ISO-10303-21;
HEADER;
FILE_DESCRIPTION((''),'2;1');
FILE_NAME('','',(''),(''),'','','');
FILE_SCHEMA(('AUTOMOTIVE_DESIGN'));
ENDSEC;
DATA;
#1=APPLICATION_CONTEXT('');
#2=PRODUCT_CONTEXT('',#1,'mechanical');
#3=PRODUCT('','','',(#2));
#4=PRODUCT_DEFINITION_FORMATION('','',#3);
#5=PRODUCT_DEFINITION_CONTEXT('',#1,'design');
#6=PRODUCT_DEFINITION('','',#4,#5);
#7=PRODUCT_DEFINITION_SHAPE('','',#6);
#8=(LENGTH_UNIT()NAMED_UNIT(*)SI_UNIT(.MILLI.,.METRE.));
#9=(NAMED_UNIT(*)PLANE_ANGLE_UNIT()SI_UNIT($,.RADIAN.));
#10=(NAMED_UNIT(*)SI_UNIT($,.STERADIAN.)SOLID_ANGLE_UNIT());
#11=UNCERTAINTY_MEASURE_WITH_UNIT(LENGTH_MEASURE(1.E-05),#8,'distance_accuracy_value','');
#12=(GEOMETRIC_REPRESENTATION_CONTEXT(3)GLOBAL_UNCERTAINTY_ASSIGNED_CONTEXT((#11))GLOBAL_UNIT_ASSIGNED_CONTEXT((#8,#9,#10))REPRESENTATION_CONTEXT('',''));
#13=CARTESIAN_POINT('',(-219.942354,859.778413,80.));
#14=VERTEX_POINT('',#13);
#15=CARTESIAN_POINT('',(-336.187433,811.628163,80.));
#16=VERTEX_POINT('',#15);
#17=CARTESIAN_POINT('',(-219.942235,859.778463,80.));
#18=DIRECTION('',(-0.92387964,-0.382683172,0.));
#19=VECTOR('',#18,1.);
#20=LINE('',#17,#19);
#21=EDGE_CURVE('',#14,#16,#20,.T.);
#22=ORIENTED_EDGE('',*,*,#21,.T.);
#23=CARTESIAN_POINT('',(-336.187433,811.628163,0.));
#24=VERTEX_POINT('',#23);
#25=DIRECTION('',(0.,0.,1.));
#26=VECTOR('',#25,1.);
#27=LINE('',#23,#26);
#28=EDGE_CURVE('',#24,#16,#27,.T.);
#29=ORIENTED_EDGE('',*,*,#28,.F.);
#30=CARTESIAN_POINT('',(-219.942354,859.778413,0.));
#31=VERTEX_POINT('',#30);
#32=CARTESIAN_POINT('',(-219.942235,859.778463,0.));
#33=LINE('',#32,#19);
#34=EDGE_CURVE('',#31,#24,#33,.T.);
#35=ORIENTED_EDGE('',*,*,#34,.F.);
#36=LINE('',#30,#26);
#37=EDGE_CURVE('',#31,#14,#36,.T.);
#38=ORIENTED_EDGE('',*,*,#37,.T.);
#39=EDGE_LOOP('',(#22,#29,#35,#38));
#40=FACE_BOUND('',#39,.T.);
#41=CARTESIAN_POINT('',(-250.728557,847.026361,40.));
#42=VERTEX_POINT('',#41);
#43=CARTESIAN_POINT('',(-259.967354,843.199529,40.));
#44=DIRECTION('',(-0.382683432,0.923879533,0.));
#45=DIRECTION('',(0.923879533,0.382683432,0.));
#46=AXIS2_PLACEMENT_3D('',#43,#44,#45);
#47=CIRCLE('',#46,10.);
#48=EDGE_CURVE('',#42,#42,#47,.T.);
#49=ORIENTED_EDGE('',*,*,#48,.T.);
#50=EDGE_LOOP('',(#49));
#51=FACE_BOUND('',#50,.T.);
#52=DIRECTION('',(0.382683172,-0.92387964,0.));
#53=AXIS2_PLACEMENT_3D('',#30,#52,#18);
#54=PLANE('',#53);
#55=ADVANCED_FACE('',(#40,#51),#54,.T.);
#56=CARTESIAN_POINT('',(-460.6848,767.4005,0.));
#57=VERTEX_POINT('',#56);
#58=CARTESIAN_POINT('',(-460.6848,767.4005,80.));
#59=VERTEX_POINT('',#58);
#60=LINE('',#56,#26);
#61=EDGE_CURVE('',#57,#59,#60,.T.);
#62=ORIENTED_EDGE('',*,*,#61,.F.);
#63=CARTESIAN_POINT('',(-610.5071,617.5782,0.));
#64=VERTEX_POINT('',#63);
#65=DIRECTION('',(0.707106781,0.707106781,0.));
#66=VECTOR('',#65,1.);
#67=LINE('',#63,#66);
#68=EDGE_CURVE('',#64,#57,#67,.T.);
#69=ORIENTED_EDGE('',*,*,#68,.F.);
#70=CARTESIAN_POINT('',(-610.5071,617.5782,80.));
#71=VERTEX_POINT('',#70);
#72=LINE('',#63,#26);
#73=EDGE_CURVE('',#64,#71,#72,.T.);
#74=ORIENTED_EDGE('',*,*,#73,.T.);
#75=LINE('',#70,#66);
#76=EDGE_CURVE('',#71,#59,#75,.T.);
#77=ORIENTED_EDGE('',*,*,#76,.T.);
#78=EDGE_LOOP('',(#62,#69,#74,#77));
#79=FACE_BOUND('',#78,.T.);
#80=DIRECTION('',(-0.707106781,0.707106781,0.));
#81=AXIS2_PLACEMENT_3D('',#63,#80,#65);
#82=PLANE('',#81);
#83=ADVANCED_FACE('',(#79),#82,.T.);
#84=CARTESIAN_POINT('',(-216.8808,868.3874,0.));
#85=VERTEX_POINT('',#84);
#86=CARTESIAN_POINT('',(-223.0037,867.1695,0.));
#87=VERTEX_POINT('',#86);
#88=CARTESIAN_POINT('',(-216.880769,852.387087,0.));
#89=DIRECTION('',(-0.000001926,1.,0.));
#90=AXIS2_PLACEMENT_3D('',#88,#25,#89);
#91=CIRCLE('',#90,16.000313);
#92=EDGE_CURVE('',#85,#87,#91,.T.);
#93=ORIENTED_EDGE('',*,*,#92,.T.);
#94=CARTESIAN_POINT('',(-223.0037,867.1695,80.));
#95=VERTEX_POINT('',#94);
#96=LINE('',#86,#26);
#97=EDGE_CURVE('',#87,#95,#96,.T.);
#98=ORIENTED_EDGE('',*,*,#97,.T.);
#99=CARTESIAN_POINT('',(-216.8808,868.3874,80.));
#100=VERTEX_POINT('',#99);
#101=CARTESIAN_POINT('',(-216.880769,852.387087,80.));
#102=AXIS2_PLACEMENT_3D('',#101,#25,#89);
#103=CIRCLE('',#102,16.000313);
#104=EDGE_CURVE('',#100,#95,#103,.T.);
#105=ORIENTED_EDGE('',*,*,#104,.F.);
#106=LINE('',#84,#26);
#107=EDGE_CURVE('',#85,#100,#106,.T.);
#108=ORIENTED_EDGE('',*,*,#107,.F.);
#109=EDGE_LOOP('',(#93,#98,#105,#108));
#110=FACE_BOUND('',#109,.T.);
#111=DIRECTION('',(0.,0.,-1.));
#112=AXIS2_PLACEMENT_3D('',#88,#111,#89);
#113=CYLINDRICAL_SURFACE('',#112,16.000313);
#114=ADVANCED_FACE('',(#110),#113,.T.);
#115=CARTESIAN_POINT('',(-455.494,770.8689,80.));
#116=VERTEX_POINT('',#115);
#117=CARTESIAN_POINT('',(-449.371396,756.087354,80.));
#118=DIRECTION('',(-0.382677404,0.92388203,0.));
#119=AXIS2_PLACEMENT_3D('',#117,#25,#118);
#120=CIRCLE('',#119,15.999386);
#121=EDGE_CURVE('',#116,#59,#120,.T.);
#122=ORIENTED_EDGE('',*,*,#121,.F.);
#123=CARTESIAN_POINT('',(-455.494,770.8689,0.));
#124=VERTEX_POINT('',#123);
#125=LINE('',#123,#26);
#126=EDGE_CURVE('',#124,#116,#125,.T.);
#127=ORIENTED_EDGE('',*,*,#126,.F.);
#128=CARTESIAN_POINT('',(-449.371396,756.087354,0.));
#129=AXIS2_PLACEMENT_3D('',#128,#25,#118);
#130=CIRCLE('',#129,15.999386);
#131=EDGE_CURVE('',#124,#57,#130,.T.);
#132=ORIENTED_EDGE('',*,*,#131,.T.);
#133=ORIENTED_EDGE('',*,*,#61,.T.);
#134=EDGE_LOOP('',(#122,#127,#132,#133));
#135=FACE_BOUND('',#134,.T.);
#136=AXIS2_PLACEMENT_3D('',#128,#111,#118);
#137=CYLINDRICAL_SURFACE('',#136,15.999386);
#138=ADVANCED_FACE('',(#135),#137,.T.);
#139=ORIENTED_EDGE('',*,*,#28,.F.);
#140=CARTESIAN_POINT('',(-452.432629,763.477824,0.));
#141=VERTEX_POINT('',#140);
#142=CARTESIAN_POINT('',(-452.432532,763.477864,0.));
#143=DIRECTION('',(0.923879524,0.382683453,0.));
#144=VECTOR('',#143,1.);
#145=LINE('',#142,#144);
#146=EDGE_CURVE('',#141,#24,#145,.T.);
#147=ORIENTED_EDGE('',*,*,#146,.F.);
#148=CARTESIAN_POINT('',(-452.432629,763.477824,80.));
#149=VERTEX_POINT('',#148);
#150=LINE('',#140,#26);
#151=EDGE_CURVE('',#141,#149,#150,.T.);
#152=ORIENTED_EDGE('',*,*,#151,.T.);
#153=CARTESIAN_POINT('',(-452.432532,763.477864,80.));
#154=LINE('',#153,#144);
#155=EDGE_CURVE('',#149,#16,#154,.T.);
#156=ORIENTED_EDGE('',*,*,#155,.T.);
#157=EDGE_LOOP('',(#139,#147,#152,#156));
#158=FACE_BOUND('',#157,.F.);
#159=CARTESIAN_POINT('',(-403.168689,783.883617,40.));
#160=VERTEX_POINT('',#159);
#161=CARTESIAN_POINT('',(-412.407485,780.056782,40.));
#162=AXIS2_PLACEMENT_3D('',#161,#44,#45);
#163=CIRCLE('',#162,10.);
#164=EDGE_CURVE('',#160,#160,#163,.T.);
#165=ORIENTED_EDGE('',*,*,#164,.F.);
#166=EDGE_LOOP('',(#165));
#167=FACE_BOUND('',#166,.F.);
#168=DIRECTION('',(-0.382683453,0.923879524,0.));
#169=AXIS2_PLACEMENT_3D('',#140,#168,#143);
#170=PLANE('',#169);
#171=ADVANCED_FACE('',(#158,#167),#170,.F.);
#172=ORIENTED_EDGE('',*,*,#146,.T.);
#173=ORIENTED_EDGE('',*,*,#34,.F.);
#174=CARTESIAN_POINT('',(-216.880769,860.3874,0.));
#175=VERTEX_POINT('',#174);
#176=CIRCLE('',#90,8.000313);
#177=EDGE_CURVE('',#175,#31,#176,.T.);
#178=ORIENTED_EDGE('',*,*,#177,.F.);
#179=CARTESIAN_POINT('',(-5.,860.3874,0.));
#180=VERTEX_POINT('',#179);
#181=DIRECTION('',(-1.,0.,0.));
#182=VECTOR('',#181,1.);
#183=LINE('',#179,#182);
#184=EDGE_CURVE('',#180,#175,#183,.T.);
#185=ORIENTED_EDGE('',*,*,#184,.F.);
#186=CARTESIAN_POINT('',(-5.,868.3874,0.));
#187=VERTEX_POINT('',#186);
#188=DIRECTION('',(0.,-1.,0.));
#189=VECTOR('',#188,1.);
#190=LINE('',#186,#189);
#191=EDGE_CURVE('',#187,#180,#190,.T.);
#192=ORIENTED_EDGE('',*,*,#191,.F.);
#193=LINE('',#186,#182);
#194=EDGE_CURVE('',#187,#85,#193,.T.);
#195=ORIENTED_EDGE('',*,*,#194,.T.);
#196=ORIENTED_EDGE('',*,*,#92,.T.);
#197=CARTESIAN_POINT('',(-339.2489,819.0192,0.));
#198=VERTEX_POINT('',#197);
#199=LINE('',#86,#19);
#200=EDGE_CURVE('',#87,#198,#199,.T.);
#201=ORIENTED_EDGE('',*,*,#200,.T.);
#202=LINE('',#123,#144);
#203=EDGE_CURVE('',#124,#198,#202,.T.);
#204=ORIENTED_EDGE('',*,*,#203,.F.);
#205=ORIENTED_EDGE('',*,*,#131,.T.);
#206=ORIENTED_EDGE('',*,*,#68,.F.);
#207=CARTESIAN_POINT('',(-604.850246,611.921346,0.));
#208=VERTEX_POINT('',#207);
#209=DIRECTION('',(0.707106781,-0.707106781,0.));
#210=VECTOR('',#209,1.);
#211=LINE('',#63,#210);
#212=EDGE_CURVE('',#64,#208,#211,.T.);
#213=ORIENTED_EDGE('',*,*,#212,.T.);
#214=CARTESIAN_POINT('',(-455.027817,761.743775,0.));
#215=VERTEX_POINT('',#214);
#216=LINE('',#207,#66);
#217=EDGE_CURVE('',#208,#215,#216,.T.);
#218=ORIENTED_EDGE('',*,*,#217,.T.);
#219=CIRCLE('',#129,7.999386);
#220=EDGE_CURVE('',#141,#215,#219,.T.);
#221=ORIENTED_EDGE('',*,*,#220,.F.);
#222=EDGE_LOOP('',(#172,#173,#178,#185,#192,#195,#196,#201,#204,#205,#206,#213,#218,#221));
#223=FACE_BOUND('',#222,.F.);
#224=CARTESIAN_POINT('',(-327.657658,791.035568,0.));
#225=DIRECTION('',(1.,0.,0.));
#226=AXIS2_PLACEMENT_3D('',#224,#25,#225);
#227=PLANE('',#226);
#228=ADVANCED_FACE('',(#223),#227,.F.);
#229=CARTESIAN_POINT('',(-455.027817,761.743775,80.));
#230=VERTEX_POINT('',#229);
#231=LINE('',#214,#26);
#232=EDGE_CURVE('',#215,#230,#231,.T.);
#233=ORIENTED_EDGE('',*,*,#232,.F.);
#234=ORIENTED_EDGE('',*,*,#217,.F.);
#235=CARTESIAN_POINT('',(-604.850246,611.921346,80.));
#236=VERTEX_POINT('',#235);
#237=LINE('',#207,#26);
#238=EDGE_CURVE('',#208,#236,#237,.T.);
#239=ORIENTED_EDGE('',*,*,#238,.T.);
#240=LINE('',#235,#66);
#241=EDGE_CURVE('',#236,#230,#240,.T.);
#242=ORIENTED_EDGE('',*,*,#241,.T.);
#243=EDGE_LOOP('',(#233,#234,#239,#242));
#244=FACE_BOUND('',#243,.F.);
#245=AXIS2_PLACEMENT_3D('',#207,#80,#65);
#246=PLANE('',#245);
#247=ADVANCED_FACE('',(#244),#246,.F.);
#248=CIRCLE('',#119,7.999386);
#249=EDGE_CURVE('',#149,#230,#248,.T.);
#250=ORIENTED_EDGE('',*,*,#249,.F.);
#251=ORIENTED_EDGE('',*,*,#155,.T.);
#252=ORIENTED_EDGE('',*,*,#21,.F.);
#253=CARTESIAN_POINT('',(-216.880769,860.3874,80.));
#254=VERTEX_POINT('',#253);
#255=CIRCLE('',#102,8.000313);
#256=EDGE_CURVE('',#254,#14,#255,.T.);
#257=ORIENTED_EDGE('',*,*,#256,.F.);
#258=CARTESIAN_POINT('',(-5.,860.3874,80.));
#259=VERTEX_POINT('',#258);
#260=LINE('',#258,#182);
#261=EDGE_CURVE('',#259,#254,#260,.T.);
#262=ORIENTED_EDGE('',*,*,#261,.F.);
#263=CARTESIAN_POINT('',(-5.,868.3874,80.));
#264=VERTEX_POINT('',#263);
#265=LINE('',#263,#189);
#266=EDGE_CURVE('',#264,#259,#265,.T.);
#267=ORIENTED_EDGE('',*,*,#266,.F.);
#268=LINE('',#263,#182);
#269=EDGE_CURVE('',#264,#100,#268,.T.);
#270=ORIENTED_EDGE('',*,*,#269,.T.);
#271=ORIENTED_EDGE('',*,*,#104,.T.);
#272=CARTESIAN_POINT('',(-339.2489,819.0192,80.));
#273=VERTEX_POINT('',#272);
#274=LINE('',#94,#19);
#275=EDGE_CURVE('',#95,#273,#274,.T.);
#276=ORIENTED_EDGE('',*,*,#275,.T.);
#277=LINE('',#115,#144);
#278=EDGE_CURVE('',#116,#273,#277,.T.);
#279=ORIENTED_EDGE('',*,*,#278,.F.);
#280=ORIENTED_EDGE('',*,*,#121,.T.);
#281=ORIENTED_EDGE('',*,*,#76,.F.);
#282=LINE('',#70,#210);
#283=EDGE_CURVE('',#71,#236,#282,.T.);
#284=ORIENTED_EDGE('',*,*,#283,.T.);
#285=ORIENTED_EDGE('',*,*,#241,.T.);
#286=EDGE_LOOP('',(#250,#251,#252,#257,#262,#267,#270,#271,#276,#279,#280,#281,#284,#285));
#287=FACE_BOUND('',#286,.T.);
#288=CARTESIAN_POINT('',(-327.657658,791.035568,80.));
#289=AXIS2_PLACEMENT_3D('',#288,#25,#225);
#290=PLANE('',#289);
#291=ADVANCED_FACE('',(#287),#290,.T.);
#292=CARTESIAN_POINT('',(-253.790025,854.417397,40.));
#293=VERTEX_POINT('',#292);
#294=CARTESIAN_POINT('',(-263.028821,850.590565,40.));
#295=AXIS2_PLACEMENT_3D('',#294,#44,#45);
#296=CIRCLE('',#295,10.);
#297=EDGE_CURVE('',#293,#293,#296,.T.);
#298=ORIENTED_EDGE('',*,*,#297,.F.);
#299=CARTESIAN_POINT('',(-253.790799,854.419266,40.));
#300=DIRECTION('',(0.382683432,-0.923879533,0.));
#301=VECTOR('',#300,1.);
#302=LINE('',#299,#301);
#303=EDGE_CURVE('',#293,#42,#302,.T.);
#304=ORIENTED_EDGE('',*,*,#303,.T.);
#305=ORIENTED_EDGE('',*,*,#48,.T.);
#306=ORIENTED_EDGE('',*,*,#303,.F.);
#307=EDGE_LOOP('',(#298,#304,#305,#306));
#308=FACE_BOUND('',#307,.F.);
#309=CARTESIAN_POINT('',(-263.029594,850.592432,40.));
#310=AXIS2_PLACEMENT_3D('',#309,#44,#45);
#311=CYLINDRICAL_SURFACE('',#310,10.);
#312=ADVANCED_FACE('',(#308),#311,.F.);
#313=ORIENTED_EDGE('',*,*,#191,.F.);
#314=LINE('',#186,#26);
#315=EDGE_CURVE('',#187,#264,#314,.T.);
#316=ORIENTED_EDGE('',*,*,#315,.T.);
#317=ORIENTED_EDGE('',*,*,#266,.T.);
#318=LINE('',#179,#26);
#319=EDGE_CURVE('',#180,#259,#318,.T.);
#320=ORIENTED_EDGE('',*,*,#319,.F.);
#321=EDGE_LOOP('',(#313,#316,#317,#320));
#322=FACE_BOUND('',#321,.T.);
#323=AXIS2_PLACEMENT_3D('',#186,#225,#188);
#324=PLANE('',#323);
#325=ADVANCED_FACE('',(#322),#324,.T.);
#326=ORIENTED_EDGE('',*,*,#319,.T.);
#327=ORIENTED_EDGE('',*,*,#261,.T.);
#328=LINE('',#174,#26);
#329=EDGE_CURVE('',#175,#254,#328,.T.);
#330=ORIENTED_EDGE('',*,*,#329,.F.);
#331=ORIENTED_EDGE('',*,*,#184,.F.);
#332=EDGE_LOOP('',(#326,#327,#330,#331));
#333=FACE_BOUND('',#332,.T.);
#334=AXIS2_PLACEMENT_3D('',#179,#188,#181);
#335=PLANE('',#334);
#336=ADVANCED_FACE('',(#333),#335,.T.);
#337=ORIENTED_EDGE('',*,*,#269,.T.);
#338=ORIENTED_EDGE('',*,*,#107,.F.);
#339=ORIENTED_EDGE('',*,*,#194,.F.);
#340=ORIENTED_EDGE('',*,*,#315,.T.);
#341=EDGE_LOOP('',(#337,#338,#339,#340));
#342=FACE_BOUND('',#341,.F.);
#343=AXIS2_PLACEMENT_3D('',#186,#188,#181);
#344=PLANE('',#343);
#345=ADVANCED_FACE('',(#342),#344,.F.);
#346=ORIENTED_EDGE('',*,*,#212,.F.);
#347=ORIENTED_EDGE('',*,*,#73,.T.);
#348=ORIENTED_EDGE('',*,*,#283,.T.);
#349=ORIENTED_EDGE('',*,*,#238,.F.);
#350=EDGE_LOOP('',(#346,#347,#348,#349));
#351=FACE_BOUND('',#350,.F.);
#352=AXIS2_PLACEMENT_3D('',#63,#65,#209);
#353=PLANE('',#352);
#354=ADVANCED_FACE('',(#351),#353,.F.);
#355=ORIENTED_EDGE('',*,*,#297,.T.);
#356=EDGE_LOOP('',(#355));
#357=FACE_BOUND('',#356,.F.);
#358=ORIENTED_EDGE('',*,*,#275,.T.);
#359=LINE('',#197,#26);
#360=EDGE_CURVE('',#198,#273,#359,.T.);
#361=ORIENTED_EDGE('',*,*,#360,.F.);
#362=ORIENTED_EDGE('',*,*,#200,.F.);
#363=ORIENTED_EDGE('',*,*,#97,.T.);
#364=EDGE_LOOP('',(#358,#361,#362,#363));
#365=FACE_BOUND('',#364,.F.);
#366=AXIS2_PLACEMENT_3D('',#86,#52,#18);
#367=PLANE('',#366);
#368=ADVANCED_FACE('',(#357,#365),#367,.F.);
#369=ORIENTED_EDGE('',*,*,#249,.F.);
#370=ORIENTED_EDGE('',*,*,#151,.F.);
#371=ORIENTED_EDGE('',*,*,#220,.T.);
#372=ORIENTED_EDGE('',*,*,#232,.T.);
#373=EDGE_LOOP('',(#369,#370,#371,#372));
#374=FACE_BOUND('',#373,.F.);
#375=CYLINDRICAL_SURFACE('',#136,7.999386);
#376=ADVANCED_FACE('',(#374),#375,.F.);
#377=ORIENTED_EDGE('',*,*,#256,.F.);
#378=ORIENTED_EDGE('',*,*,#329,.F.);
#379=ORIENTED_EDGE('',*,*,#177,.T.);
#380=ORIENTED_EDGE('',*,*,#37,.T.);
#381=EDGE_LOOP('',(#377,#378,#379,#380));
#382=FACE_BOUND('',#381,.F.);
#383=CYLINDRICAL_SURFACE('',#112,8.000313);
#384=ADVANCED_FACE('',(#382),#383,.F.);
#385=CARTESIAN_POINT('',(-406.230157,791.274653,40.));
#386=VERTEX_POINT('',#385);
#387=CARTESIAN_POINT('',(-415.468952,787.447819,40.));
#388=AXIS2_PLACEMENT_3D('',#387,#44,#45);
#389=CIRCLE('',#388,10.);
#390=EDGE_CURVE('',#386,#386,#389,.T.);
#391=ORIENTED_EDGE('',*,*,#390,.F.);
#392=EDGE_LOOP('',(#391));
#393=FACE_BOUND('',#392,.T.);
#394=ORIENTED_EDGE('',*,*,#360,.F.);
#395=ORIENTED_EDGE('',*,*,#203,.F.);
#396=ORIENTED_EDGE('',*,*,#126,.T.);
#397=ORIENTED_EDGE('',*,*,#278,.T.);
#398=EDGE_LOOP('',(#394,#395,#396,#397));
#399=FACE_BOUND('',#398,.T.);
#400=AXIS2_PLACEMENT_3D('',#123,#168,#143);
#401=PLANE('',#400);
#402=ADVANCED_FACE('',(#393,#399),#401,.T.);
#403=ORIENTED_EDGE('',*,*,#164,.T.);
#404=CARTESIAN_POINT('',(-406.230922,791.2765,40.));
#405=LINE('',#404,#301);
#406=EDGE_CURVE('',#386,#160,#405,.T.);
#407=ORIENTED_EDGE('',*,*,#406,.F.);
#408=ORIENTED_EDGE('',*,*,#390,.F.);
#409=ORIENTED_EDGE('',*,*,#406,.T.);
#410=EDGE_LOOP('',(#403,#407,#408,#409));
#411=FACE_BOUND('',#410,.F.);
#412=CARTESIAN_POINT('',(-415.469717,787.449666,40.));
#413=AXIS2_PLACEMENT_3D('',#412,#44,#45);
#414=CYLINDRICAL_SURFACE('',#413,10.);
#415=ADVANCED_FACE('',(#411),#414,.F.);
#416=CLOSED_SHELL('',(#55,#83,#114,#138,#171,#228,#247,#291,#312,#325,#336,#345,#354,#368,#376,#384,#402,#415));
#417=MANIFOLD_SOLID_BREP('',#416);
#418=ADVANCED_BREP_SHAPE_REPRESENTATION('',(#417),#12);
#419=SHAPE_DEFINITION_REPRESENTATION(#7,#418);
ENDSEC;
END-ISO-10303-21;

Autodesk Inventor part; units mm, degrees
ref_plane "YZ Plane" through (0, 0, 0) normal (1, 0, 0) x (0, 1, 0)
ref_plane "XZ Plane" through (0, 0, 0) normal (0, 1, 0) x (-1, 0, 0)
ref_plane "XY Plane" through (0, 0, 0) normal (0, 0, 1) x (1, 0, 0)
sketch "Sketch2" plane through (0, 0, 0) normal (0, 0, 1) x (1, 0, 0)
  line L0 (0, 277.6336) -> (196.3166, 196.3166) construction
  line L1 (196.3166, 196.3166) -> (277.6336, 0) construction
  line L2 (277.6336, 0) -> (196.3166, -196.3166) construction
  line L3 (196.3166, -196.3166) -> (0, -277.6336) construction
  line L4 (0, -277.6336) -> (-196.3166, -196.3166) construction
  line L5 (-196.3166, -196.3166) -> (-277.6336, 0) construction
  line L6 (-277.6336, 0) -> (-196.3166, 196.3166) construction
  line L7 (-196.3166, 196.3166) -> (0, 277.6336) construction
  line L8 (-196.3166, 196.3166) -> (0, 277.6336) construction
  line L9 (-461.2666, 773.8898) -> (-221.0579, 873.3874) construction
  line L10 (-98.1583, 236.9751) -> (-341.1623, 823.6386) construction
  line L11 (-221.0579, 873.3874) -> (0, 873.3874) construction
  line L12 (0, 873.3874) -> (0, 277.6336) construction
  line L13 (-461.2666, 773.8898) -> (-617.5782, 617.5782) construction
  line L14 (-617.5782, 617.5782) -> (-196.3166, 196.3166) construction
  line L15 (-223.0037, 867.1695) -> (-339.2489, 819.0192)
  line L16 (-5, 868.3874) -> (-216.8808, 868.3874)
  line L17 (-455.494, 770.8689) -> (-339.2489, 819.0192)
  line L18 (-610.5071, 617.5782) -> (-460.6848, 767.4005)
  arc A0 (-216.8808, 868.3874) -> (-223.0037, 867.1695) centre (-216.8808, 852.3874) ccw
  arc A1 (-455.494, 770.8689) -> (-460.6848, 767.4005) centre (-449.3711, 756.0868) ccw
  point P0 (0, 0)
  point P1 (0, 0)
  point P2 (0, 0)
  point P3 (-220.0634, 868.3874)
  point P4 (-458.4343, 769.651)
  dimension "d0" = 513
  dimension "d1" = 260
  dimension "d2" = 635
  dimension "d6" = 5
  dimension "d10" = 5
  dimension "d14" = 5
  dimension "d15" = 16
contour flange "Contour Flange1" sketch "Sketch2" thickness 8 bend radius 8 width 80 along (0, 0, 1) mid plane no both sides no wall seen from (-110.9404, 868.3874, 0) lies toward (0, -1, 0) curves L16 A0 L15 L17 A1 L18
bend "Bend1"
corner "Corner1"
sketch "Sketch3" plane through (-455.494, 770.8689, 80) normal (-0.3826834, 0.9238795, 0) x (0.9238795, 0.3826834, 0)
  line L0 (125.8228, 80) -> (125.8228, 0) construction
  line L1 (0, 0) -> (251.6457, 0) projected
  circle A0 centre (43.3228, 40) radius 10
  circle A1 centre (208.3228, 40) radius 10
  point P0 (125.8228, 40)
  dimension "d27" = 20
  dimension "d28" = 82.5
extrude "Extrusion1" cut sketch "Sketch3" against normal up to surface (8 mm away)
equation "\"d0\" = Барабан_габарит_по_кассетам"
equation "\"d1\" = Кассета_длина_грани"
equation "\"d2\" = Кассета_высота"
equation "\"d10\" = d6"
equation "\"d15\" = BendRadius + Thickness"
equation "\"d16\" = Thickness"
equation "\"d17\" = BendReliefWidth"
equation "\"d18\" = BendReliefDepth"
equation "\"d19\" = MinimumRemnant"
equation "\"d20\" = TransitionRadius"
equation "\"d22\" = BendRadius"
equation "\"d24\" = CornerReliefSize"
equation "\"d25\" = GapSize"
equation "\"d26\" = JacobiRadiusSize"
equation "\"BendRadius\" = Thickness"
equation "\"BendReliefWidth\" = Thickness"
equation "\"BendReliefDepth\" = 0.5 * Thickness"
equation "\"CornerReliefSize\" = 4 * Thickness"
equation "\"MinimumRemnant\" = 2 * Thickness"
equation "\"TransitionRadius\" = BendRadius"
equation "\"JacobiRadiusSize\" = BendRadius"
equation "\"GapSize\" = Thickness"
equation "\"Барабан_габарит_по_кассетам\" = 513"
equation "\"Кассета_длина_грани\" = 260"
equation "\"Кассета_высота\" = 635"
equation "\"Thickness\" = 8"
properties part number "ДМФ 01 52 Верхний лист v2.0"
